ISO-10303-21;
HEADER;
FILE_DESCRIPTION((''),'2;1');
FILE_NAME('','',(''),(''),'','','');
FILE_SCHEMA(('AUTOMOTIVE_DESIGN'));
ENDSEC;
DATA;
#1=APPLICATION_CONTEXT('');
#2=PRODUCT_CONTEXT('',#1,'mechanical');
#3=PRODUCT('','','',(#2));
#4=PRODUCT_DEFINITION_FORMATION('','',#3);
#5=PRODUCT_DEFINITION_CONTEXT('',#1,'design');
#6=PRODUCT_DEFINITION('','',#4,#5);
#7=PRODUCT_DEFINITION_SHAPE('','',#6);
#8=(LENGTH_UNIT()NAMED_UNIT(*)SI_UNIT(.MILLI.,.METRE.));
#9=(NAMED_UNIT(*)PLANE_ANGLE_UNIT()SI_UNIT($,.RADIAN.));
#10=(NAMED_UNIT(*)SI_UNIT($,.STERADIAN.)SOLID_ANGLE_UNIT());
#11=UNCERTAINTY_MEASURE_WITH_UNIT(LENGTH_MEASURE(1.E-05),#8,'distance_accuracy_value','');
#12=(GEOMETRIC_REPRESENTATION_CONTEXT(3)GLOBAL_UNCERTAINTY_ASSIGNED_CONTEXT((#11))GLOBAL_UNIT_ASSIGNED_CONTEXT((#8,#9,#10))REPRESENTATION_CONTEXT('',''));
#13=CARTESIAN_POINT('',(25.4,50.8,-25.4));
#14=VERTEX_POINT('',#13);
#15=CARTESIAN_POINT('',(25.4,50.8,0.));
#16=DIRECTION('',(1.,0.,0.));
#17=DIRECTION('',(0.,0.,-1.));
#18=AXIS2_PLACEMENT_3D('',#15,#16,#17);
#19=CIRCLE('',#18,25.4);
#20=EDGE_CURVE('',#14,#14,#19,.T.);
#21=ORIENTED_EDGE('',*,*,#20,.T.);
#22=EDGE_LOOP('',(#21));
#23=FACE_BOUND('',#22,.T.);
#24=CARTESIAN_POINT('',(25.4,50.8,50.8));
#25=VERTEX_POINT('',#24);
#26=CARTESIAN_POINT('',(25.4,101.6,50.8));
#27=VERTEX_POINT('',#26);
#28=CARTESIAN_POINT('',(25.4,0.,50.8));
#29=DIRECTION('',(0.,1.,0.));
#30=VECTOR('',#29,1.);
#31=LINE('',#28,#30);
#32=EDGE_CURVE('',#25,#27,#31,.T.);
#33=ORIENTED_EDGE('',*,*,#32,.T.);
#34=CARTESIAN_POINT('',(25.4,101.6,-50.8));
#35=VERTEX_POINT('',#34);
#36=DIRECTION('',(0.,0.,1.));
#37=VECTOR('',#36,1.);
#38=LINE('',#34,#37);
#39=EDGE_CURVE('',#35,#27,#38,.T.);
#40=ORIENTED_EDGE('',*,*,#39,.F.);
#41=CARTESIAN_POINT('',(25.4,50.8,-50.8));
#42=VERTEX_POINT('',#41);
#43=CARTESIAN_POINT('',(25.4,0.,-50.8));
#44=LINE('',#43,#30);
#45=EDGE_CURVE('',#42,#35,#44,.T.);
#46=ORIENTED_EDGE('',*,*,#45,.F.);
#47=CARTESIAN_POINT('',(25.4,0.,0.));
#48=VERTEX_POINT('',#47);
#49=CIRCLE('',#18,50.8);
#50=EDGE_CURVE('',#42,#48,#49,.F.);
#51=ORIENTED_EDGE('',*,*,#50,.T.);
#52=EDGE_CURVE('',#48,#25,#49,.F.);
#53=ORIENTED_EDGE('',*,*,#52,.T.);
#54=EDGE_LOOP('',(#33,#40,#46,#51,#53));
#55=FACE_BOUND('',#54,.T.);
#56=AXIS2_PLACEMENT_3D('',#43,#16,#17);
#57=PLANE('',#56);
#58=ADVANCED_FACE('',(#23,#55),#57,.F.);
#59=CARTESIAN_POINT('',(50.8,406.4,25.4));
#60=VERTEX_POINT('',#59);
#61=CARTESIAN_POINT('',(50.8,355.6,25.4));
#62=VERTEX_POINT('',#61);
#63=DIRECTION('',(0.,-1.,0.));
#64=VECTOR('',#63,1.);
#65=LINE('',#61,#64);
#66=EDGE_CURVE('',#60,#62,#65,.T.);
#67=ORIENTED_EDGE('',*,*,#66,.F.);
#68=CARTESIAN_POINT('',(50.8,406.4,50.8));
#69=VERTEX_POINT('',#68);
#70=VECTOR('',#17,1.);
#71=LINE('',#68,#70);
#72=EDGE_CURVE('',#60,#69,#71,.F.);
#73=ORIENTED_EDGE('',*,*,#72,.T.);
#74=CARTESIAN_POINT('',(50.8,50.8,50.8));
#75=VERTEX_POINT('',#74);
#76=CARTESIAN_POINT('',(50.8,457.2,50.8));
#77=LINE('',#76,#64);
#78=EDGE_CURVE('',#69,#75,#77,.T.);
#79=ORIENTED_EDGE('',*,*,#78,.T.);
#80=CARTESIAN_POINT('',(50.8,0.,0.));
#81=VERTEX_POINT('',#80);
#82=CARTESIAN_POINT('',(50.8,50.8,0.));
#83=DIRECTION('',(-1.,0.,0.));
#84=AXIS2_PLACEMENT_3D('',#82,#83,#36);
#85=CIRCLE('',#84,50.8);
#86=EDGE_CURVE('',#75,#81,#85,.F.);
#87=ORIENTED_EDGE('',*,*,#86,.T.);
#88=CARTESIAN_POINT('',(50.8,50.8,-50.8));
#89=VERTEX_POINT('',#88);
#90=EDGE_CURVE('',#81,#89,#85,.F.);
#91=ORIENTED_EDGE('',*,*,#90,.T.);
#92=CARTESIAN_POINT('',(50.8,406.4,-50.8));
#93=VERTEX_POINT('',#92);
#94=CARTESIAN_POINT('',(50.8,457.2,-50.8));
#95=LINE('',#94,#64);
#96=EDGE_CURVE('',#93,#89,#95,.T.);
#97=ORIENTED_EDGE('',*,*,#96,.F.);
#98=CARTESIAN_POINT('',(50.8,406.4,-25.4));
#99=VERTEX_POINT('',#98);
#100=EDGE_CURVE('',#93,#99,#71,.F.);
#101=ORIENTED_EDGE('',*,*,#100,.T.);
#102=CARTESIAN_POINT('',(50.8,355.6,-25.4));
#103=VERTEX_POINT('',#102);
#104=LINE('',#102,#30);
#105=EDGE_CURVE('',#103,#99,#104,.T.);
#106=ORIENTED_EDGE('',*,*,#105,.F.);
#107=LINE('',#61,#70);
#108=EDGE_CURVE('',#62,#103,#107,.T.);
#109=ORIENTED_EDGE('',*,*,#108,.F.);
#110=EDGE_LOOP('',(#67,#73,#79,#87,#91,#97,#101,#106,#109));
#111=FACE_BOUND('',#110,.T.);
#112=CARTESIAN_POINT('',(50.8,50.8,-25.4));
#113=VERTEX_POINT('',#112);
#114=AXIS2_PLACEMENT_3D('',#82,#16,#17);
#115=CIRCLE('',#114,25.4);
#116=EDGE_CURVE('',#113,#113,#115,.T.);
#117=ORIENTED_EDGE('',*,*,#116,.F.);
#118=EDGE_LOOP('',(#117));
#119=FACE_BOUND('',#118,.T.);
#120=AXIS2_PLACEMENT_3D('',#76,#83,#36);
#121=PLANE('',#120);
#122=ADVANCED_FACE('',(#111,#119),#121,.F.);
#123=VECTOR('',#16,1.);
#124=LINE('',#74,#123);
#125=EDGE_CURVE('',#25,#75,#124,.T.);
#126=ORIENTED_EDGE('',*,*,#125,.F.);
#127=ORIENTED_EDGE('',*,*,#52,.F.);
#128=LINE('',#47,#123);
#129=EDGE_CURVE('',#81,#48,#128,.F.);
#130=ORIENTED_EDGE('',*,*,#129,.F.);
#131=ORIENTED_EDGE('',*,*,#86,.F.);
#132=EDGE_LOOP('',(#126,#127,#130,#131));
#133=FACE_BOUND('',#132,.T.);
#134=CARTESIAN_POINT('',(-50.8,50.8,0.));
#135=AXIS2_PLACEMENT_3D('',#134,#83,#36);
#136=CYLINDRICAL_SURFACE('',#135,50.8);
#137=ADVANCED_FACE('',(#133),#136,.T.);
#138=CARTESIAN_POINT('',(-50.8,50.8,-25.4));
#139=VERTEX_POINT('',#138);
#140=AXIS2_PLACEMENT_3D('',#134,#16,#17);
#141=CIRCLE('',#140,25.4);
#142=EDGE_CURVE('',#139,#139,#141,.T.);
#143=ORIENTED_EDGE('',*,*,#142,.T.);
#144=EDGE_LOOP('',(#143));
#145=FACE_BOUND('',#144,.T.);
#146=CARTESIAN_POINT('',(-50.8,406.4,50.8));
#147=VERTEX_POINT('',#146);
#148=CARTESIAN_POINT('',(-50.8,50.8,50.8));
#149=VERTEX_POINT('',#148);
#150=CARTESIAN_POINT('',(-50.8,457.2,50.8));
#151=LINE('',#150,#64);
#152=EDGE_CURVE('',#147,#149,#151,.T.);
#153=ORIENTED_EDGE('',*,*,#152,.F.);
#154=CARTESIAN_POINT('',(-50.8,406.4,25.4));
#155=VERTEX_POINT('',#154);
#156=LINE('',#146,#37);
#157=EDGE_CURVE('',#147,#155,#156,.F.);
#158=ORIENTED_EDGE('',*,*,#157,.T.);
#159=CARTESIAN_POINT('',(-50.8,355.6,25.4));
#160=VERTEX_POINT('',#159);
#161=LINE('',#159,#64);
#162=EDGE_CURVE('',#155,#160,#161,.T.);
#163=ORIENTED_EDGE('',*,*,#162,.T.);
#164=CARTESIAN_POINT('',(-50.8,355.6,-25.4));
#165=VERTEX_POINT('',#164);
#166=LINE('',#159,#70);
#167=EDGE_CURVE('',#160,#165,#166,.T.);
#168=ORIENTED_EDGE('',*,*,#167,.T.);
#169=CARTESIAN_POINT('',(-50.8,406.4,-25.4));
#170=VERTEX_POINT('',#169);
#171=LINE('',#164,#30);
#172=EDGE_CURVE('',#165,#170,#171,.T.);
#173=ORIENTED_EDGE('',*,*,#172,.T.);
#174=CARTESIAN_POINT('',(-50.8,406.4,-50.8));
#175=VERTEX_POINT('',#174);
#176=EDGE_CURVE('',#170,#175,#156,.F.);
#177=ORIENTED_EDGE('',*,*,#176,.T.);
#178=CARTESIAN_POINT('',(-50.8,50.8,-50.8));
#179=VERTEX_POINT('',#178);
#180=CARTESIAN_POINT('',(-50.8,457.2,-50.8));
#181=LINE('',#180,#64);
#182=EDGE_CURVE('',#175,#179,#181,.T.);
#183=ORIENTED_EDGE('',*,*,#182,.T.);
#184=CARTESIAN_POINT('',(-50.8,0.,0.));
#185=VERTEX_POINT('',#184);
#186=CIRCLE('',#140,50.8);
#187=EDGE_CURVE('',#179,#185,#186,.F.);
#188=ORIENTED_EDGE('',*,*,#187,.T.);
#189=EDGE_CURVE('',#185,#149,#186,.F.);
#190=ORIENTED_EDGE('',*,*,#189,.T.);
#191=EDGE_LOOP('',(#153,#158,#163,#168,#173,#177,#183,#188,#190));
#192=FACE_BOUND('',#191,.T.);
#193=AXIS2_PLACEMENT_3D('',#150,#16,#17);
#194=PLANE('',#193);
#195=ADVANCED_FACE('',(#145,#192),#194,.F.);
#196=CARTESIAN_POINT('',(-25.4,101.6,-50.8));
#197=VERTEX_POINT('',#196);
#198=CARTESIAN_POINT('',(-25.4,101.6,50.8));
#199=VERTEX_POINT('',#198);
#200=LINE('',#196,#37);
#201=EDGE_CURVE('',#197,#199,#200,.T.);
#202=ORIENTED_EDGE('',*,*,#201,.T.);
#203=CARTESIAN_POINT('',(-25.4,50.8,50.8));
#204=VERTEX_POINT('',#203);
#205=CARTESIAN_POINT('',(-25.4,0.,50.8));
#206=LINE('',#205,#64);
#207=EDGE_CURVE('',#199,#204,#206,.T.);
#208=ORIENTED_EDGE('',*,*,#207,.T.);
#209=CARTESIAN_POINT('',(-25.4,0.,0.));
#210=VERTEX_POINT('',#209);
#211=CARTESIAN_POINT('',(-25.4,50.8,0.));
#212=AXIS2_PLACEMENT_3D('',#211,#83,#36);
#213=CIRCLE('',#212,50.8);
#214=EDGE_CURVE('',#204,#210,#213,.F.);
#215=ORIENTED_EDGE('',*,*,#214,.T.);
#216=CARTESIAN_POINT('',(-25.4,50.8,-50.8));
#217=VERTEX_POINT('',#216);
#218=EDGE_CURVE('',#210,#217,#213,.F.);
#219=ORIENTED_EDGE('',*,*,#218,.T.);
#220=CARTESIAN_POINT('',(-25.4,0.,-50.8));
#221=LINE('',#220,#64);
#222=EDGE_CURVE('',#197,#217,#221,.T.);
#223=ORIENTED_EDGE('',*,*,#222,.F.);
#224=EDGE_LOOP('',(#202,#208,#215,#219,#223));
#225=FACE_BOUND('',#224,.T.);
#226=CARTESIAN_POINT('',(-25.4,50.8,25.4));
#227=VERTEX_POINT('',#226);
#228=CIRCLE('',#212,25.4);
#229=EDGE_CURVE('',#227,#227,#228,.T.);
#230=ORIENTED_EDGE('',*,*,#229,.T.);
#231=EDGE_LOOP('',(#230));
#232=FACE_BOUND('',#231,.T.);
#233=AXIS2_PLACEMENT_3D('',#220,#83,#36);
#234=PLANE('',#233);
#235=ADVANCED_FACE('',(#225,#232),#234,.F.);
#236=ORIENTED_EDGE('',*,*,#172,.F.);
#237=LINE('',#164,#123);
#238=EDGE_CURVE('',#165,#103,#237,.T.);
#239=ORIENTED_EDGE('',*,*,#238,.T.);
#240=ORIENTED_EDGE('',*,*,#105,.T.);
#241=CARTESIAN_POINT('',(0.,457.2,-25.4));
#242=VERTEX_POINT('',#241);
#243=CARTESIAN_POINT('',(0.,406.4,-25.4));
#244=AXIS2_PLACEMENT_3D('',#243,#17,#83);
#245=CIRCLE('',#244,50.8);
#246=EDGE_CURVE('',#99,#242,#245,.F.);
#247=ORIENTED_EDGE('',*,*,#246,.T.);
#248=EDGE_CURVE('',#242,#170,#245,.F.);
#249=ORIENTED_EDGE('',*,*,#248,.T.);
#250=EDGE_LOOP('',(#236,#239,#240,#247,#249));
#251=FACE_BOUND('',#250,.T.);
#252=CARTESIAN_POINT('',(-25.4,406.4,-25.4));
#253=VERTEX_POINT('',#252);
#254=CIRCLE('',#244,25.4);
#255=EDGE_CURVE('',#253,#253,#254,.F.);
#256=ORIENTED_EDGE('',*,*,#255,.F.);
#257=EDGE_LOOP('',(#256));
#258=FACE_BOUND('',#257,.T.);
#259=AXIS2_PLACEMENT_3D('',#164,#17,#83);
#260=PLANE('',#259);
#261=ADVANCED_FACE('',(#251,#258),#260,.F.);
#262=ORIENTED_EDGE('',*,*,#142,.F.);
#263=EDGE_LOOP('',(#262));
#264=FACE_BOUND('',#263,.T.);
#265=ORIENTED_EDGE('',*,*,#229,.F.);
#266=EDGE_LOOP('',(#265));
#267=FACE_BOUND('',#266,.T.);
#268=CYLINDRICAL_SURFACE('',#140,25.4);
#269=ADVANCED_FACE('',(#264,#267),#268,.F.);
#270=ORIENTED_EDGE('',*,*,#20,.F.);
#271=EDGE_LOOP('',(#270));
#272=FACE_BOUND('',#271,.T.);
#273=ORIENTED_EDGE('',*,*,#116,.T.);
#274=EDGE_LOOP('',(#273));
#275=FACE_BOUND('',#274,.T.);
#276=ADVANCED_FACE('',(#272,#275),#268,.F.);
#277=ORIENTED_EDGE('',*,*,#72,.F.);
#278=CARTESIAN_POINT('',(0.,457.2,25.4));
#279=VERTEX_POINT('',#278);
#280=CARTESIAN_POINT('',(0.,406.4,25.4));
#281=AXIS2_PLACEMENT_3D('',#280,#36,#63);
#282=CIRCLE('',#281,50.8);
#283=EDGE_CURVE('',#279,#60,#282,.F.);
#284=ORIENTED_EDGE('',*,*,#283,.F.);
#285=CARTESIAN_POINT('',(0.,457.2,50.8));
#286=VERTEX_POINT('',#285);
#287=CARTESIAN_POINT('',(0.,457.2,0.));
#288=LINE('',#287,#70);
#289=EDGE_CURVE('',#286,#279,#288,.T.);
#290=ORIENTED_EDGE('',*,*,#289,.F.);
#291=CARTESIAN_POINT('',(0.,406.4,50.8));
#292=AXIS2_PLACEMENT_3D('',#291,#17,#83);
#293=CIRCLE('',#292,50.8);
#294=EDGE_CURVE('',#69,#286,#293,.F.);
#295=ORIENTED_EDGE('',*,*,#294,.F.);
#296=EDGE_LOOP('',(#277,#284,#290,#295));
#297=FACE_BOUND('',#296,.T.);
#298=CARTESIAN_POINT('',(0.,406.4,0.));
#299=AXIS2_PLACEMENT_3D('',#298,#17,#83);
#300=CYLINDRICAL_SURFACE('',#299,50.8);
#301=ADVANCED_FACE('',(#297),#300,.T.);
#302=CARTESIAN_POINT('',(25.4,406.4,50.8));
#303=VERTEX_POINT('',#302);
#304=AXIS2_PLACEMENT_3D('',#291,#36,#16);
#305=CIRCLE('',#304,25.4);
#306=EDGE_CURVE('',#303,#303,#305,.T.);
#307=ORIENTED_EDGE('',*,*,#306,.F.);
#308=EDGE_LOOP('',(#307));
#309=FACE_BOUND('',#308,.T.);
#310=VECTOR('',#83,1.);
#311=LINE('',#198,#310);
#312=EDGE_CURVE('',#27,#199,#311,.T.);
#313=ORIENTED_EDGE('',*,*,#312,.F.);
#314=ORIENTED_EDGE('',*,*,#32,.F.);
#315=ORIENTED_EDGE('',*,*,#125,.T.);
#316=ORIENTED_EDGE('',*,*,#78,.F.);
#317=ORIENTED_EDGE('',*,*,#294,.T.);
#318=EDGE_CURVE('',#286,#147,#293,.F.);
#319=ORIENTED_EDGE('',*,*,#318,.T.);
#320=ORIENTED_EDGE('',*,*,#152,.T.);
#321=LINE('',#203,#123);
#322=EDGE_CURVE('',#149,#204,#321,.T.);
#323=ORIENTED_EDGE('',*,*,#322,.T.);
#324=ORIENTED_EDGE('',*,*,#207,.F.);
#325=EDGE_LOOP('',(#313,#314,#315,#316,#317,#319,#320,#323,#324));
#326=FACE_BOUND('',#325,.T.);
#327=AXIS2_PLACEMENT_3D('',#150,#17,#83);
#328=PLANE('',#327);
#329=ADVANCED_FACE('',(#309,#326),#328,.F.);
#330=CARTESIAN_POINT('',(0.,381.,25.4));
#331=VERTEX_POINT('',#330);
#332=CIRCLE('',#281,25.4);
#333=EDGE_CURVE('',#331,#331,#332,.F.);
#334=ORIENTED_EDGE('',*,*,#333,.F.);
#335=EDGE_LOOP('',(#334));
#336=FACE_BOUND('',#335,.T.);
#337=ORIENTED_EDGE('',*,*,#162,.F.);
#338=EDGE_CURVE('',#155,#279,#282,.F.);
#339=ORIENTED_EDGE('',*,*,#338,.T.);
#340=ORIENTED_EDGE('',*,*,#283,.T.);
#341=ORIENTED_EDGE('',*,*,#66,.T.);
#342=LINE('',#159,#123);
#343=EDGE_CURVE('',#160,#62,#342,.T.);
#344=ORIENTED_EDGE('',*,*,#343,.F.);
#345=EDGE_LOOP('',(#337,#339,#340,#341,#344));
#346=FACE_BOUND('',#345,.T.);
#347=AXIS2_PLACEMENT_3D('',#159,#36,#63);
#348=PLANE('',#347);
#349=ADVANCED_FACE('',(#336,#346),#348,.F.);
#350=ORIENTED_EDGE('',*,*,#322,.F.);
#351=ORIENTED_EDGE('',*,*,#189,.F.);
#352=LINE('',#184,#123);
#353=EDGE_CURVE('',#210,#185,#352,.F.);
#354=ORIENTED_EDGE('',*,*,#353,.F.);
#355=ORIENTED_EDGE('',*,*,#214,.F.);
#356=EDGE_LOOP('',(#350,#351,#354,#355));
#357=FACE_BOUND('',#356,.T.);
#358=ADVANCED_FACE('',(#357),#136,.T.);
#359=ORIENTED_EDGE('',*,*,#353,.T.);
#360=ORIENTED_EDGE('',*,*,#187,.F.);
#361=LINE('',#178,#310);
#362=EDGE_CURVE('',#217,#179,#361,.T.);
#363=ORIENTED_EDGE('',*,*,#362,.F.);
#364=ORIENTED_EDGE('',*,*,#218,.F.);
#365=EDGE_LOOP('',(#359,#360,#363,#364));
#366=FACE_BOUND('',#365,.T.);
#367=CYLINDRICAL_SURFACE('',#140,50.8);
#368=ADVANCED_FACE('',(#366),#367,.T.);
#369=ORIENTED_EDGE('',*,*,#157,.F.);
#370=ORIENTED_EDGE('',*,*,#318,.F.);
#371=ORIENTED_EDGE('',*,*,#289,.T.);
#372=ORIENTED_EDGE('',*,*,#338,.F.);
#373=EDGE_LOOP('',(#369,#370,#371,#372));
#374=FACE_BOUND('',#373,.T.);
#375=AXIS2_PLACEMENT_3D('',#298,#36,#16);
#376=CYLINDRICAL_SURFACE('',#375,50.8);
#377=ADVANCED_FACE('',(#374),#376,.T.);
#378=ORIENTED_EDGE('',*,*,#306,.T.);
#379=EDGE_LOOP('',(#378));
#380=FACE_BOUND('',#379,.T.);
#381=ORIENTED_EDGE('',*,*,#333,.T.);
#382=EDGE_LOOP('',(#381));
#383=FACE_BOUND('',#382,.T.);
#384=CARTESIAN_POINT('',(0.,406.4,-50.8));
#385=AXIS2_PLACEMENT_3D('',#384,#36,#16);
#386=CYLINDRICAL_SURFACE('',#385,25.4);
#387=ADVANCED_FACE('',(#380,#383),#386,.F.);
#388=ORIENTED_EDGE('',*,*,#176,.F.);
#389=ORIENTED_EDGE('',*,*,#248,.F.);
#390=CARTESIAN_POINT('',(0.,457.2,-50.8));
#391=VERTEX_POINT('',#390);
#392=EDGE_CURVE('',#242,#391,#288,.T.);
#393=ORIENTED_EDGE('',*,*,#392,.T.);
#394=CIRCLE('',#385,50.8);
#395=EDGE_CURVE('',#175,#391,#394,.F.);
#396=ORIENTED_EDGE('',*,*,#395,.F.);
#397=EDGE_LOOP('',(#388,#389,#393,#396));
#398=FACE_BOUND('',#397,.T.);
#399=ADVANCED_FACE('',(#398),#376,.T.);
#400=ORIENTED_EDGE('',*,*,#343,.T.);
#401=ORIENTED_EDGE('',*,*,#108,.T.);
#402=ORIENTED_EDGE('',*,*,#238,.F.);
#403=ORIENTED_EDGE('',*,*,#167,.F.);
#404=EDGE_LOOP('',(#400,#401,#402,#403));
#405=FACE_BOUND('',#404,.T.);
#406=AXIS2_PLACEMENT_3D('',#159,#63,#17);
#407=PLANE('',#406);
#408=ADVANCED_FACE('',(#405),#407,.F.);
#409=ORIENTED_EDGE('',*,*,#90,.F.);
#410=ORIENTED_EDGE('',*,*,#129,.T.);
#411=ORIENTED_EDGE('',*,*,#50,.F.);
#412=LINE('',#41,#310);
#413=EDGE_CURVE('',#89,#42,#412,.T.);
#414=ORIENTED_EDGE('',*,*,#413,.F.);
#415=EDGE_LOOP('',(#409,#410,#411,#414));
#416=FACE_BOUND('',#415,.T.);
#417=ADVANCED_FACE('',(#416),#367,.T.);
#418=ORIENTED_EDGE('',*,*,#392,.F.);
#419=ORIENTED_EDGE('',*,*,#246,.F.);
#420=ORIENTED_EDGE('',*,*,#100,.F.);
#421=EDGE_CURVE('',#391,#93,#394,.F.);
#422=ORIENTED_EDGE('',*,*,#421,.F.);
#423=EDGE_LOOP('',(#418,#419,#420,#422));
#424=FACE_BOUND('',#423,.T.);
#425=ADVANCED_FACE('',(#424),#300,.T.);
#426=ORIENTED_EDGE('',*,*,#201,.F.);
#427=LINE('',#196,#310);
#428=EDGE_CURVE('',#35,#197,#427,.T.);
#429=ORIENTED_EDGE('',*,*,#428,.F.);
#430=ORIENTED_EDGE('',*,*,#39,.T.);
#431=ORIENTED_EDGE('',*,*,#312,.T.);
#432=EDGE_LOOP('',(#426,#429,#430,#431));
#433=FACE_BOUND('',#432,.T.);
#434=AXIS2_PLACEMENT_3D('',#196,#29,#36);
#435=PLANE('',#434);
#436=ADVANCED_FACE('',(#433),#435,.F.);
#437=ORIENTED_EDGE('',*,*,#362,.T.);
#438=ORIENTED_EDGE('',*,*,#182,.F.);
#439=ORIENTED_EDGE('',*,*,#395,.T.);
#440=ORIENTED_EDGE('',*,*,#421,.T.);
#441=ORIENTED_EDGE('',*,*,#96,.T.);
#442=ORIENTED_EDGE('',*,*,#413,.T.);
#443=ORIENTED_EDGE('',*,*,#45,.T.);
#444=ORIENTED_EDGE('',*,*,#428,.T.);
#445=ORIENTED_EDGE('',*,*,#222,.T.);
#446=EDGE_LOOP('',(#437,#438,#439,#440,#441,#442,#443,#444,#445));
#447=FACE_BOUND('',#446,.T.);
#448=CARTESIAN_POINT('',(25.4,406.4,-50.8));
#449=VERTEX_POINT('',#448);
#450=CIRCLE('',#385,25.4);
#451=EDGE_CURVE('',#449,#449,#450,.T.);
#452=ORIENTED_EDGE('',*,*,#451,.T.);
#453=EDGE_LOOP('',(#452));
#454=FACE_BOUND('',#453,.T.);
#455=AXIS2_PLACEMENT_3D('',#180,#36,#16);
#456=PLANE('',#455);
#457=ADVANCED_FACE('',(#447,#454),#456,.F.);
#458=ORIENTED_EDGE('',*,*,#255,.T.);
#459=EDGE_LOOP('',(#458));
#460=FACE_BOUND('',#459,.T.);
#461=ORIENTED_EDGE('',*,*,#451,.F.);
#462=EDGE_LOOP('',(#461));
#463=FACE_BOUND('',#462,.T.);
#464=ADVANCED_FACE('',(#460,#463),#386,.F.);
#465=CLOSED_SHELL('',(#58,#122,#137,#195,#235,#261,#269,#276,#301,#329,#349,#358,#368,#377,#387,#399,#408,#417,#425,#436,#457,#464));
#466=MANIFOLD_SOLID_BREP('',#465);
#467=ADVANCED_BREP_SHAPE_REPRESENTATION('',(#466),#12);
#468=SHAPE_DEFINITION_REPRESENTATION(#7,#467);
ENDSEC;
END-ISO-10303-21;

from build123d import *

# Parameters (mm, degrees)
SKETCH2_W               = 101.6
SKETCH2_H               = 101.6
BOSS_EXTRUDE1_DEPTH     = 457.2
CUT_EXTRUDE1_DEPTH      = 463.810025821
CUT_EXTRUDE1_DEPTH_BACK = 463.810025821
SKETCH3_R               = 25.4
SKETCH3_W               = 50.8
SKETCH3_H               = 101.6
FILLET1_R               = 50.8
CUT_EXTRUDE2_DEPTH      = 472.099819571
CUT_EXTRUDE2_DEPTH_BACK = 472.099819571
SKETCH4_R               = 25.4
SKETCH4_W               = 50.8
SKETCH4_H               = 101.6


with BuildPart() as part:
    # Sketch2 → Boss-Extrude1 (new body)
    with BuildSketch(Plane(origin=(0, 0, 0), x_dir=(1, 0, 0), z_dir=(0, 1, 0))):
        Rectangle(SKETCH2_W, SKETCH2_H)
    extrude(amount=BOSS_EXTRUDE1_DEPTH)

    # Sketch3 → Cut-Extrude1 (cut, two sides: drawn at the far end of the back side and taken through both)
    with BuildSketch(Plane.XY.offset(-CUT_EXTRUDE1_DEPTH_BACK)):
        with Locations((0, 406.4)):
            Circle(SKETCH3_R)
        with Locations((0, 50.8)):
            Rectangle(SKETCH3_W, SKETCH3_H)
    extrude(amount=CUT_EXTRUDE1_DEPTH + CUT_EXTRUDE1_DEPTH_BACK, mode=Mode.SUBTRACT)

    # Fillet1
    fillet1_edges = [part.edges().sort_by_distance(p)[0] for p in [
        (-38.1, 0, -50.8),
        (-38.1, 0, 50.8),
        (38.1, 0, -50.8),
        (38.1, 0, 50.8),
        (-50.8, 457.2, 0),
        (50.8, 457.2, 0),
    ]]
    fillet(fillet1_edges, radius=FILLET1_R - 0.0001)  # a hair under: the kernel refuses the full size

    # Sketch4 → Cut-Extrude2 (cut, two sides: drawn at the far end of the back side and taken through both)
    with BuildSketch(Plane(origin=(50.8, 0, 0), x_dir=(0, 0, -1), z_dir=(1, 0, 0)).offset(-CUT_EXTRUDE2_DEPTH_BACK)):
        with Locations((0, 50.8)):
            Circle(SKETCH4_R)
        with Locations((0, 406.4)):
            Rectangle(SKETCH4_W, SKETCH4_H)
    extrude(amount=CUT_EXTRUDE2_DEPTH + CUT_EXTRUDE2_DEPTH_BACK, mode=Mode.SUBTRACT)


solid = part.part
